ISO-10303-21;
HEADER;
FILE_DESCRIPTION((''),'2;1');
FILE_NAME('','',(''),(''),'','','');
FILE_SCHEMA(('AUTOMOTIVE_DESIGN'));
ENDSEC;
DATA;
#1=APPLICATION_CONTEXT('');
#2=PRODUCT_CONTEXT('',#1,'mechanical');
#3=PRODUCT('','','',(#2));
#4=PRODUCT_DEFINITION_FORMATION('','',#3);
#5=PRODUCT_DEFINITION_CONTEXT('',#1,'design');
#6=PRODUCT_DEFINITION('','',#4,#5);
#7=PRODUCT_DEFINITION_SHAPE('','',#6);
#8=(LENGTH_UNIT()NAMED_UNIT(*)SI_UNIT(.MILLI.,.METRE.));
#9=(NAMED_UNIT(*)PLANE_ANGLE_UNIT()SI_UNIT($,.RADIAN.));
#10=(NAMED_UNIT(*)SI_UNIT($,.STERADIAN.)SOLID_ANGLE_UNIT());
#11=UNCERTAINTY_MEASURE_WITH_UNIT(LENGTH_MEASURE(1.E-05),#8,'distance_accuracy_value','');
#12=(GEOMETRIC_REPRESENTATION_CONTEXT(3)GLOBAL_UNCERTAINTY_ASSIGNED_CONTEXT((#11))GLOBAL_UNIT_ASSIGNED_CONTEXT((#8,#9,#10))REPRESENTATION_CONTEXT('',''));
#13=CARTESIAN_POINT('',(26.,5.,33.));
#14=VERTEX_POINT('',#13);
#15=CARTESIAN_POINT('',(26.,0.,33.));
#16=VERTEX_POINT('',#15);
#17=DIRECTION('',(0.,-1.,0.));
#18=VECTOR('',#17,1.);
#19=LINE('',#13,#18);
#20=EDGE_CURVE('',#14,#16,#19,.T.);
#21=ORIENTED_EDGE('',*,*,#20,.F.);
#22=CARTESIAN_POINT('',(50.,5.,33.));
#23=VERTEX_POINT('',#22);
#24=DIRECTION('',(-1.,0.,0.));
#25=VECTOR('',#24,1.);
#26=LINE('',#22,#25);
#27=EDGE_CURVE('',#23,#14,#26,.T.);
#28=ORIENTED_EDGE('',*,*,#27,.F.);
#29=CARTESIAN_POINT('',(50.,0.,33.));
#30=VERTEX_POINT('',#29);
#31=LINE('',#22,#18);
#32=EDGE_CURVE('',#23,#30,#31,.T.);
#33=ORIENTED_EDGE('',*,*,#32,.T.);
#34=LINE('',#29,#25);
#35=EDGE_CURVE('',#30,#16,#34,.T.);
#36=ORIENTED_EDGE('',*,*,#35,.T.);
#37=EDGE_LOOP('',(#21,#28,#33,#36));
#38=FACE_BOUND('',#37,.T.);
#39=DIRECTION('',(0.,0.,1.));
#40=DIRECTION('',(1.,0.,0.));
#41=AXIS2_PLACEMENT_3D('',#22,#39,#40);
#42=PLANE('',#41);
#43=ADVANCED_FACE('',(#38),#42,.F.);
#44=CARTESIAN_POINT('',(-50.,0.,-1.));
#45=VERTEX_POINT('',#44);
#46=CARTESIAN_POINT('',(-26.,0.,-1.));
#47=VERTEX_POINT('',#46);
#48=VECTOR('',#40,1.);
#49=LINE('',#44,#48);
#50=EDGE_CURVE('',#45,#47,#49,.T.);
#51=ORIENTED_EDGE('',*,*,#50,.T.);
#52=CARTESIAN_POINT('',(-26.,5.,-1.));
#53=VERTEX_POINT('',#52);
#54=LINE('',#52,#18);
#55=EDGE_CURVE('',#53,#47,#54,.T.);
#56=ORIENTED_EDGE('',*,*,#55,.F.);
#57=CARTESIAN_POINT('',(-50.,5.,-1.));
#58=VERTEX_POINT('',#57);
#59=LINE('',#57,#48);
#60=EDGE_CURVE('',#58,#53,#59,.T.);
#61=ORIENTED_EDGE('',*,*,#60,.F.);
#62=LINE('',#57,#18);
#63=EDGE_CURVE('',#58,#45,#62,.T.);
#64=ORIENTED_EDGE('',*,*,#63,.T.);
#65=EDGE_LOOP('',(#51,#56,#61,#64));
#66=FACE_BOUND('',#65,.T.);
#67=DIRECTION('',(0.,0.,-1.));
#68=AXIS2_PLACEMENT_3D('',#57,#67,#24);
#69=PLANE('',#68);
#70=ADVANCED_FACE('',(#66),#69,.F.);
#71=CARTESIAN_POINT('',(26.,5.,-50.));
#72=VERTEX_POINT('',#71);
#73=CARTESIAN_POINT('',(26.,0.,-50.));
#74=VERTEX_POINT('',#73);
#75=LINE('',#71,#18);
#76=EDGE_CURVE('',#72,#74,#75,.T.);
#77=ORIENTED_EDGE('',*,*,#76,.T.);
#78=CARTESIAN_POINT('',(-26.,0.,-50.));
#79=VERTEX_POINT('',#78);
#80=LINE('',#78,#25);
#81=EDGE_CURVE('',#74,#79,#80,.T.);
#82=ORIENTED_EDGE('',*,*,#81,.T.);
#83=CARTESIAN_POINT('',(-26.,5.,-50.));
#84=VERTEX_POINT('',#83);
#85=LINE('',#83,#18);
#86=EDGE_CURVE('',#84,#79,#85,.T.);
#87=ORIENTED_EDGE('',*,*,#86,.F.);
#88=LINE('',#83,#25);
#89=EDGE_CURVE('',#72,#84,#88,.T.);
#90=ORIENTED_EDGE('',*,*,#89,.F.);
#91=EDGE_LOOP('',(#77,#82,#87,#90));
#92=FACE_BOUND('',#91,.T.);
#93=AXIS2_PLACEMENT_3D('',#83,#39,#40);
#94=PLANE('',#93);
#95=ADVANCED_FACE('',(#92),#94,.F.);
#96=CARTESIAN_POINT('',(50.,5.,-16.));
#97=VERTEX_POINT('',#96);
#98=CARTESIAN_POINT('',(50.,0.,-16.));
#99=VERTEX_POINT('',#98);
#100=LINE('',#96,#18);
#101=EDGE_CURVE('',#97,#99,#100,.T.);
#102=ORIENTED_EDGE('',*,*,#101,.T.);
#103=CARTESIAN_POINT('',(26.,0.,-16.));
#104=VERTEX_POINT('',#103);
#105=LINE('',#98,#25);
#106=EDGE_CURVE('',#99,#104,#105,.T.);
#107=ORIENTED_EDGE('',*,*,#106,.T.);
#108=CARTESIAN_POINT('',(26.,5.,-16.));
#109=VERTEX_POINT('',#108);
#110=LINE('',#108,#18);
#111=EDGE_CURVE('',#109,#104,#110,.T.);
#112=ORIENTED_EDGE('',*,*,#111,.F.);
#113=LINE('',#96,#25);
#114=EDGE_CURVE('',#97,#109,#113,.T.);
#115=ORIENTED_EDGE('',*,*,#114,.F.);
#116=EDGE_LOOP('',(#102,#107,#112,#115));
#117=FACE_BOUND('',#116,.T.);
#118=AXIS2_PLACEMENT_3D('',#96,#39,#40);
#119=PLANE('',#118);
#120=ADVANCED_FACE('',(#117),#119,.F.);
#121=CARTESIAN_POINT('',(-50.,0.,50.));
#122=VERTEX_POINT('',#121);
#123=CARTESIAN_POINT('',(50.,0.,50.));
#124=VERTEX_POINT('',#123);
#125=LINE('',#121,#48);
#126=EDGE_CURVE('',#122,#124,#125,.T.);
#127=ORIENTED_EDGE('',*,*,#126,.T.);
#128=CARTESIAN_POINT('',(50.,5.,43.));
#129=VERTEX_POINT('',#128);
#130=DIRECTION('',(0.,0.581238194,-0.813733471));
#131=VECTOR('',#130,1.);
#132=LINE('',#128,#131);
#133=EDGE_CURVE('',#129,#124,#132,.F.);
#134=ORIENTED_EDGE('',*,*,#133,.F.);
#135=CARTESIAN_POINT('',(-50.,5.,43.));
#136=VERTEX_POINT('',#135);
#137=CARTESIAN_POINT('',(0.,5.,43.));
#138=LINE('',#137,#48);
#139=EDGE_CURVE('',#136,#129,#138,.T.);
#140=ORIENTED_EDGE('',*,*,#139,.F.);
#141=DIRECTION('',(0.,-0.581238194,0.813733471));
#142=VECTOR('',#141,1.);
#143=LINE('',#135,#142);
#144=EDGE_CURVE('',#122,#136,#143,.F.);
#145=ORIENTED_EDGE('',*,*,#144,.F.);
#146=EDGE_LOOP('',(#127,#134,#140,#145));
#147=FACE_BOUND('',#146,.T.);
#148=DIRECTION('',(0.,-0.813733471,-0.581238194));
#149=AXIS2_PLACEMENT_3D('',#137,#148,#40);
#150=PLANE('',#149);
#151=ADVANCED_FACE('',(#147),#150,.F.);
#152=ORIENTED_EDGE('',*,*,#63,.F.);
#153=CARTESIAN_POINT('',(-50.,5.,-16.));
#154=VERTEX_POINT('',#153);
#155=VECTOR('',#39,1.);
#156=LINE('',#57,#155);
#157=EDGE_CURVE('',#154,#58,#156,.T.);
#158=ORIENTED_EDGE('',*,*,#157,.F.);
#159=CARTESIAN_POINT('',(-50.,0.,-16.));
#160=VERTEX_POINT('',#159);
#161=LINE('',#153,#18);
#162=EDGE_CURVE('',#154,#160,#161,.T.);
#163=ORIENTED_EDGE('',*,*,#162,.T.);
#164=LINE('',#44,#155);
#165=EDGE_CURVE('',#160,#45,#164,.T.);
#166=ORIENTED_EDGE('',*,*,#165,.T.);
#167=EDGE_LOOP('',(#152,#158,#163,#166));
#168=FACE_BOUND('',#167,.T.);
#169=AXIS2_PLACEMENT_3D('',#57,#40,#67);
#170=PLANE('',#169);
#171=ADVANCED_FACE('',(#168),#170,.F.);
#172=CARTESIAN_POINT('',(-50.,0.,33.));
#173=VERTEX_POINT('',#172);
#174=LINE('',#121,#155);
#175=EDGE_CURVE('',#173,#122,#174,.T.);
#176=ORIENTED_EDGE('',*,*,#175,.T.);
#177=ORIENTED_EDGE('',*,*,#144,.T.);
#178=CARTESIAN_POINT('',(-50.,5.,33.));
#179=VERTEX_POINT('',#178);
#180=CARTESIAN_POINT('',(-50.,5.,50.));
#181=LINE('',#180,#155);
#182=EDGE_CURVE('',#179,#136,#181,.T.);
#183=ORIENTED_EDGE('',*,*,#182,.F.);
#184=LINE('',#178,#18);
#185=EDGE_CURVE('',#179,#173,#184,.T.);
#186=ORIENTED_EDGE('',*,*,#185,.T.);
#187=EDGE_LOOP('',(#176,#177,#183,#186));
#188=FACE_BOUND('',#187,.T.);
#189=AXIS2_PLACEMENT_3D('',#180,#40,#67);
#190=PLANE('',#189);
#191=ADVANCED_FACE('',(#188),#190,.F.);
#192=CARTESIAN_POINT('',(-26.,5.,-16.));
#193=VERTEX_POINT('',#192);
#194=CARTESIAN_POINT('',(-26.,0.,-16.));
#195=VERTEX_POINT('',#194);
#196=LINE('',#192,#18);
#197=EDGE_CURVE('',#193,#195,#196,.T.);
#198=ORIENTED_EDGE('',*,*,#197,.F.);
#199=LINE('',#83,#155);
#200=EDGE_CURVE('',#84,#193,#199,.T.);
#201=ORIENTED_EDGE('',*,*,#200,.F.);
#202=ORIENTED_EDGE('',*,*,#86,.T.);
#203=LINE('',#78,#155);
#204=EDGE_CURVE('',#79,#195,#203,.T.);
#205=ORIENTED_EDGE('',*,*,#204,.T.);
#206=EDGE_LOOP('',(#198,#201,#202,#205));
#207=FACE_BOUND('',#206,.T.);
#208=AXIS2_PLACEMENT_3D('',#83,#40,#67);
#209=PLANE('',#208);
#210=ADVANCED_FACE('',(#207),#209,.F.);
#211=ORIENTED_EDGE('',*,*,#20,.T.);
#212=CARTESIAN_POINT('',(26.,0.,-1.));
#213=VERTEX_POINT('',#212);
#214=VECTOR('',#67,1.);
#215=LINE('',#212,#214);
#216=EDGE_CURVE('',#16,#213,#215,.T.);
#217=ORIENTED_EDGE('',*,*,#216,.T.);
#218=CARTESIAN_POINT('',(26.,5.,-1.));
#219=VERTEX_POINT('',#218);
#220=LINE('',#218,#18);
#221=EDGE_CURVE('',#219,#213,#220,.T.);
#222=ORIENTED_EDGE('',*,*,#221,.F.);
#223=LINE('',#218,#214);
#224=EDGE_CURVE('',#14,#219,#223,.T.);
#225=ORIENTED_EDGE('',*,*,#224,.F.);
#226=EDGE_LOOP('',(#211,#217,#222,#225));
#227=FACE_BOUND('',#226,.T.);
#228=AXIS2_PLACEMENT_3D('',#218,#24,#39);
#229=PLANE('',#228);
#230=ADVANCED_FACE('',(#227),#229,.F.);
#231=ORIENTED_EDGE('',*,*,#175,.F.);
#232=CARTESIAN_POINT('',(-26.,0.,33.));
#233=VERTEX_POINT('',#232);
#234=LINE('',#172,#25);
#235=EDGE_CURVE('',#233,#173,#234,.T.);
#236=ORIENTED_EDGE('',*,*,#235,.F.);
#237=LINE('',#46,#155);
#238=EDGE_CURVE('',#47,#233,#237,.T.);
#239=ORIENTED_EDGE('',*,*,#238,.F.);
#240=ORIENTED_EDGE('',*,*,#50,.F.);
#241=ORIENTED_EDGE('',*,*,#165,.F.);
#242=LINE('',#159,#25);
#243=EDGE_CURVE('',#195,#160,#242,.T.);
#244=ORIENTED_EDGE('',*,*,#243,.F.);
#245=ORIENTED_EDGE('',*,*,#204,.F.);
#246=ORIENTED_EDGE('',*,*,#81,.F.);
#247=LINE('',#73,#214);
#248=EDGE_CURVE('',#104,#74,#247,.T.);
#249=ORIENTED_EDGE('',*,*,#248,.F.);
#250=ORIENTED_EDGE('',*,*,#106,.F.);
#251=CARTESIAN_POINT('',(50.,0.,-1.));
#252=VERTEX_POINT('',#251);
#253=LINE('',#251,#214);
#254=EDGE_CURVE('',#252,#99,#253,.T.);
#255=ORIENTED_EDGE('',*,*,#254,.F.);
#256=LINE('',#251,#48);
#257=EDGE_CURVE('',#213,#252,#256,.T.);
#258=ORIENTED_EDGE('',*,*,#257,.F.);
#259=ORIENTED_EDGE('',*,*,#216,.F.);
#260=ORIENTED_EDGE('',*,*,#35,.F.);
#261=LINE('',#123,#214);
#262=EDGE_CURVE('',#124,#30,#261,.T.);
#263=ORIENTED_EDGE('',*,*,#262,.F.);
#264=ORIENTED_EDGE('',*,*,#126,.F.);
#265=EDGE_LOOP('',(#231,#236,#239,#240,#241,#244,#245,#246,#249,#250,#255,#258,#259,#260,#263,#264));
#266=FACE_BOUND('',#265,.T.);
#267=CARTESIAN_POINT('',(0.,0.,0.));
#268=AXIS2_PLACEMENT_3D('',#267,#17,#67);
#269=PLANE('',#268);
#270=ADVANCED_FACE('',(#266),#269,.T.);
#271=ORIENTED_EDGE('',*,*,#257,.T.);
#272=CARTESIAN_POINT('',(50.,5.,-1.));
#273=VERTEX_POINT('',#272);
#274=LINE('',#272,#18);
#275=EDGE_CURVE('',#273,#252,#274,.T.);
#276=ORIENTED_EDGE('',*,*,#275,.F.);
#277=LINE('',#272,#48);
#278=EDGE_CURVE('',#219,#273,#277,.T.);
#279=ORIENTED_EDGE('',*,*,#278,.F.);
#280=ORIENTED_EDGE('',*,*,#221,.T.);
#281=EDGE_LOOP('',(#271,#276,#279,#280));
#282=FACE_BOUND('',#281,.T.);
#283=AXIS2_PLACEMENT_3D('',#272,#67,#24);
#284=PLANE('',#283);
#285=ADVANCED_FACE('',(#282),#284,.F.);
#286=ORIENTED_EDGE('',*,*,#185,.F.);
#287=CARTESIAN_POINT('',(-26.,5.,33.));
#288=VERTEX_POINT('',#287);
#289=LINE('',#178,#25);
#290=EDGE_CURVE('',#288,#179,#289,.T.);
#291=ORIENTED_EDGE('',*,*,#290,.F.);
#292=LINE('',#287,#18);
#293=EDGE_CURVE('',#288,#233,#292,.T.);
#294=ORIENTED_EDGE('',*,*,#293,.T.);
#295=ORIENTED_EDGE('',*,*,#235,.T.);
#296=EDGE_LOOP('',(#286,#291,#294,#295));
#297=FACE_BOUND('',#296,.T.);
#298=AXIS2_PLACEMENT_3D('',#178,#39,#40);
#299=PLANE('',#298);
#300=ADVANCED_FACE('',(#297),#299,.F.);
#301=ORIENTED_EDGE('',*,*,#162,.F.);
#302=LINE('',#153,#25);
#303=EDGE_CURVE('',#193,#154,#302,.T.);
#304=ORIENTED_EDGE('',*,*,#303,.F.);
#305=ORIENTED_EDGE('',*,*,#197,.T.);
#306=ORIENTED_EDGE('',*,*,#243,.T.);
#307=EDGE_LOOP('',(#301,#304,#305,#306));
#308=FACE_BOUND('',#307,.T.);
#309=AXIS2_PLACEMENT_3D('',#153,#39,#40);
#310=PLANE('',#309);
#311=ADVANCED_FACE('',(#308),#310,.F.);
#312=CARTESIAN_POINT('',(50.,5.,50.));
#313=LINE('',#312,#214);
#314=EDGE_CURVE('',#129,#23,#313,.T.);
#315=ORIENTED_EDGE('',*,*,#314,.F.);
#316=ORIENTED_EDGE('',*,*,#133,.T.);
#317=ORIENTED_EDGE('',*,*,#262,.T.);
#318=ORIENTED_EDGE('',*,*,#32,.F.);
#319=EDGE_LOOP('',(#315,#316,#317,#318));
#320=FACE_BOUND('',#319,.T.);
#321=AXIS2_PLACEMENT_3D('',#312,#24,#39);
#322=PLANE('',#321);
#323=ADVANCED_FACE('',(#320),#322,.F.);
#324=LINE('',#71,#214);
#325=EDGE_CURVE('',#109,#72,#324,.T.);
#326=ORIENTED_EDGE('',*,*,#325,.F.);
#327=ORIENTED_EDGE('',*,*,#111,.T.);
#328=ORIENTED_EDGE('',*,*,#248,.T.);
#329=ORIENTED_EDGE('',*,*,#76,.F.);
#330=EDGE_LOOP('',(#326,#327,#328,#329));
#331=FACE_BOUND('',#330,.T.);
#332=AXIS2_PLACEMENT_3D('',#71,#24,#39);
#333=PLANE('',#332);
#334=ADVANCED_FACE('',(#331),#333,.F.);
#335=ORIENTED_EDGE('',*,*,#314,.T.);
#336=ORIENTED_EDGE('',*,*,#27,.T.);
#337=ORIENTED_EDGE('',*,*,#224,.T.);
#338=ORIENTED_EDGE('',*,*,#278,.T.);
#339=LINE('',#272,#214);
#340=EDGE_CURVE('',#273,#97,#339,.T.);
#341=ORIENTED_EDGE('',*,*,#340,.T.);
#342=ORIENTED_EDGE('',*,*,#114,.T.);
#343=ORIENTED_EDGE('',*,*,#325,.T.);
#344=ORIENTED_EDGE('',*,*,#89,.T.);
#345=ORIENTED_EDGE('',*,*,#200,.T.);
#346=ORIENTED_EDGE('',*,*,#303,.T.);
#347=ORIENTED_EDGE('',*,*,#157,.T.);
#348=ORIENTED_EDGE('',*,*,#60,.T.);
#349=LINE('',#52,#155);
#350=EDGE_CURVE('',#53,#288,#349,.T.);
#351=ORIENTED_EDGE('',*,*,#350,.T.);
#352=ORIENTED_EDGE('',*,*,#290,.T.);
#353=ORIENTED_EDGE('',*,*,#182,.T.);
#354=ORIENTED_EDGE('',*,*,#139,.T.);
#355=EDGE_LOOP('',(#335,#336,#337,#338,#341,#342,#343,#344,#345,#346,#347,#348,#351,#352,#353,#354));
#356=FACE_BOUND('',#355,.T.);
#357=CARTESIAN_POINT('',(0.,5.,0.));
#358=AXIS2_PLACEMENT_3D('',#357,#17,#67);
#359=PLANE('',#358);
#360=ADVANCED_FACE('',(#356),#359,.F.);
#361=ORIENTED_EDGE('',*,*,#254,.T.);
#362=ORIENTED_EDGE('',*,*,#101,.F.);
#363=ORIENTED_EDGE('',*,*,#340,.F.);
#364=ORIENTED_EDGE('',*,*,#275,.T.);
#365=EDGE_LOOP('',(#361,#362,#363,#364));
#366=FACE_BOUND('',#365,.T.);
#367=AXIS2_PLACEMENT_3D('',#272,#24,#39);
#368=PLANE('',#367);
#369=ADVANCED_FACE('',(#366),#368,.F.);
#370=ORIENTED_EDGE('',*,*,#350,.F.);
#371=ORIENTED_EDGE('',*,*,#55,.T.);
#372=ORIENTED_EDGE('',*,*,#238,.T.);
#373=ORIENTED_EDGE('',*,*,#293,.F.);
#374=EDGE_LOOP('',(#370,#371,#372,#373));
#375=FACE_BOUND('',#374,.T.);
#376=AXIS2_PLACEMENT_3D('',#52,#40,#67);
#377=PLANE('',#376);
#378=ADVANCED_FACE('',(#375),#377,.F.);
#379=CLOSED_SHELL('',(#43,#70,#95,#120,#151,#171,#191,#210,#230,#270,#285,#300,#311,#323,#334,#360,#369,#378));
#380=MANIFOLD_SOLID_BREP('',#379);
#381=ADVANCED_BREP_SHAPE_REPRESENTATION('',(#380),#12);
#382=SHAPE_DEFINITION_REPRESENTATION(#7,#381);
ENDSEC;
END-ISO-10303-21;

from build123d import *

# Parameters (mm, degrees)
SALIENTE_EXTRUIR1_DEPTH  = 5
CORTE_CUCHILLA_START     = 29.061909686
CORTE_CUCHILLA_OUTLINE_W = 100
CORTE_CUCHILLA_OUTLINE_H = 11
CORTE_CUCHILLA_DEPTH     = 4.938090314


with BuildPart() as part:
    # Croquis2 → Saliente-Extruir1 (new body)
    with BuildSketch(Plane(origin=(0, 0, 0), x_dir=(1, 0, 0), z_dir=(0, 1, 0))):
        Polygon((-50, 1), (-50, 16), (-26, 16), (-26, 50), (26, 50), (26, 16), (50, 16), (50, 1), (26, 1), (26, -33), (50, -33), (50, -50), (-50, -50), (-50, -33), (-26, -33), (-26, 1), align=None)
    extrude(amount=SALIENTE_EXTRUIR1_DEPTH)

    # Corte-Cuchilla: read off the stored shape, not the designer's step
    # Corte-Cuchilla outline → Corte-Cuchilla (cut)
    with BuildSketch(Plane(origin=(0, 0, 0), x_dir=(1, 0, 0), z_dir=(0, 0.8137334712067352, 0.5812381937190961)).offset(CORTE_CUCHILLA_START)):
        with Locations((0, -36.5)):
            Rectangle(CORTE_CUCHILLA_OUTLINE_W, CORTE_CUCHILLA_OUTLINE_H)
    extrude(amount=CORTE_CUCHILLA_DEPTH, mode=Mode.SUBTRACT)


solid = part.part
